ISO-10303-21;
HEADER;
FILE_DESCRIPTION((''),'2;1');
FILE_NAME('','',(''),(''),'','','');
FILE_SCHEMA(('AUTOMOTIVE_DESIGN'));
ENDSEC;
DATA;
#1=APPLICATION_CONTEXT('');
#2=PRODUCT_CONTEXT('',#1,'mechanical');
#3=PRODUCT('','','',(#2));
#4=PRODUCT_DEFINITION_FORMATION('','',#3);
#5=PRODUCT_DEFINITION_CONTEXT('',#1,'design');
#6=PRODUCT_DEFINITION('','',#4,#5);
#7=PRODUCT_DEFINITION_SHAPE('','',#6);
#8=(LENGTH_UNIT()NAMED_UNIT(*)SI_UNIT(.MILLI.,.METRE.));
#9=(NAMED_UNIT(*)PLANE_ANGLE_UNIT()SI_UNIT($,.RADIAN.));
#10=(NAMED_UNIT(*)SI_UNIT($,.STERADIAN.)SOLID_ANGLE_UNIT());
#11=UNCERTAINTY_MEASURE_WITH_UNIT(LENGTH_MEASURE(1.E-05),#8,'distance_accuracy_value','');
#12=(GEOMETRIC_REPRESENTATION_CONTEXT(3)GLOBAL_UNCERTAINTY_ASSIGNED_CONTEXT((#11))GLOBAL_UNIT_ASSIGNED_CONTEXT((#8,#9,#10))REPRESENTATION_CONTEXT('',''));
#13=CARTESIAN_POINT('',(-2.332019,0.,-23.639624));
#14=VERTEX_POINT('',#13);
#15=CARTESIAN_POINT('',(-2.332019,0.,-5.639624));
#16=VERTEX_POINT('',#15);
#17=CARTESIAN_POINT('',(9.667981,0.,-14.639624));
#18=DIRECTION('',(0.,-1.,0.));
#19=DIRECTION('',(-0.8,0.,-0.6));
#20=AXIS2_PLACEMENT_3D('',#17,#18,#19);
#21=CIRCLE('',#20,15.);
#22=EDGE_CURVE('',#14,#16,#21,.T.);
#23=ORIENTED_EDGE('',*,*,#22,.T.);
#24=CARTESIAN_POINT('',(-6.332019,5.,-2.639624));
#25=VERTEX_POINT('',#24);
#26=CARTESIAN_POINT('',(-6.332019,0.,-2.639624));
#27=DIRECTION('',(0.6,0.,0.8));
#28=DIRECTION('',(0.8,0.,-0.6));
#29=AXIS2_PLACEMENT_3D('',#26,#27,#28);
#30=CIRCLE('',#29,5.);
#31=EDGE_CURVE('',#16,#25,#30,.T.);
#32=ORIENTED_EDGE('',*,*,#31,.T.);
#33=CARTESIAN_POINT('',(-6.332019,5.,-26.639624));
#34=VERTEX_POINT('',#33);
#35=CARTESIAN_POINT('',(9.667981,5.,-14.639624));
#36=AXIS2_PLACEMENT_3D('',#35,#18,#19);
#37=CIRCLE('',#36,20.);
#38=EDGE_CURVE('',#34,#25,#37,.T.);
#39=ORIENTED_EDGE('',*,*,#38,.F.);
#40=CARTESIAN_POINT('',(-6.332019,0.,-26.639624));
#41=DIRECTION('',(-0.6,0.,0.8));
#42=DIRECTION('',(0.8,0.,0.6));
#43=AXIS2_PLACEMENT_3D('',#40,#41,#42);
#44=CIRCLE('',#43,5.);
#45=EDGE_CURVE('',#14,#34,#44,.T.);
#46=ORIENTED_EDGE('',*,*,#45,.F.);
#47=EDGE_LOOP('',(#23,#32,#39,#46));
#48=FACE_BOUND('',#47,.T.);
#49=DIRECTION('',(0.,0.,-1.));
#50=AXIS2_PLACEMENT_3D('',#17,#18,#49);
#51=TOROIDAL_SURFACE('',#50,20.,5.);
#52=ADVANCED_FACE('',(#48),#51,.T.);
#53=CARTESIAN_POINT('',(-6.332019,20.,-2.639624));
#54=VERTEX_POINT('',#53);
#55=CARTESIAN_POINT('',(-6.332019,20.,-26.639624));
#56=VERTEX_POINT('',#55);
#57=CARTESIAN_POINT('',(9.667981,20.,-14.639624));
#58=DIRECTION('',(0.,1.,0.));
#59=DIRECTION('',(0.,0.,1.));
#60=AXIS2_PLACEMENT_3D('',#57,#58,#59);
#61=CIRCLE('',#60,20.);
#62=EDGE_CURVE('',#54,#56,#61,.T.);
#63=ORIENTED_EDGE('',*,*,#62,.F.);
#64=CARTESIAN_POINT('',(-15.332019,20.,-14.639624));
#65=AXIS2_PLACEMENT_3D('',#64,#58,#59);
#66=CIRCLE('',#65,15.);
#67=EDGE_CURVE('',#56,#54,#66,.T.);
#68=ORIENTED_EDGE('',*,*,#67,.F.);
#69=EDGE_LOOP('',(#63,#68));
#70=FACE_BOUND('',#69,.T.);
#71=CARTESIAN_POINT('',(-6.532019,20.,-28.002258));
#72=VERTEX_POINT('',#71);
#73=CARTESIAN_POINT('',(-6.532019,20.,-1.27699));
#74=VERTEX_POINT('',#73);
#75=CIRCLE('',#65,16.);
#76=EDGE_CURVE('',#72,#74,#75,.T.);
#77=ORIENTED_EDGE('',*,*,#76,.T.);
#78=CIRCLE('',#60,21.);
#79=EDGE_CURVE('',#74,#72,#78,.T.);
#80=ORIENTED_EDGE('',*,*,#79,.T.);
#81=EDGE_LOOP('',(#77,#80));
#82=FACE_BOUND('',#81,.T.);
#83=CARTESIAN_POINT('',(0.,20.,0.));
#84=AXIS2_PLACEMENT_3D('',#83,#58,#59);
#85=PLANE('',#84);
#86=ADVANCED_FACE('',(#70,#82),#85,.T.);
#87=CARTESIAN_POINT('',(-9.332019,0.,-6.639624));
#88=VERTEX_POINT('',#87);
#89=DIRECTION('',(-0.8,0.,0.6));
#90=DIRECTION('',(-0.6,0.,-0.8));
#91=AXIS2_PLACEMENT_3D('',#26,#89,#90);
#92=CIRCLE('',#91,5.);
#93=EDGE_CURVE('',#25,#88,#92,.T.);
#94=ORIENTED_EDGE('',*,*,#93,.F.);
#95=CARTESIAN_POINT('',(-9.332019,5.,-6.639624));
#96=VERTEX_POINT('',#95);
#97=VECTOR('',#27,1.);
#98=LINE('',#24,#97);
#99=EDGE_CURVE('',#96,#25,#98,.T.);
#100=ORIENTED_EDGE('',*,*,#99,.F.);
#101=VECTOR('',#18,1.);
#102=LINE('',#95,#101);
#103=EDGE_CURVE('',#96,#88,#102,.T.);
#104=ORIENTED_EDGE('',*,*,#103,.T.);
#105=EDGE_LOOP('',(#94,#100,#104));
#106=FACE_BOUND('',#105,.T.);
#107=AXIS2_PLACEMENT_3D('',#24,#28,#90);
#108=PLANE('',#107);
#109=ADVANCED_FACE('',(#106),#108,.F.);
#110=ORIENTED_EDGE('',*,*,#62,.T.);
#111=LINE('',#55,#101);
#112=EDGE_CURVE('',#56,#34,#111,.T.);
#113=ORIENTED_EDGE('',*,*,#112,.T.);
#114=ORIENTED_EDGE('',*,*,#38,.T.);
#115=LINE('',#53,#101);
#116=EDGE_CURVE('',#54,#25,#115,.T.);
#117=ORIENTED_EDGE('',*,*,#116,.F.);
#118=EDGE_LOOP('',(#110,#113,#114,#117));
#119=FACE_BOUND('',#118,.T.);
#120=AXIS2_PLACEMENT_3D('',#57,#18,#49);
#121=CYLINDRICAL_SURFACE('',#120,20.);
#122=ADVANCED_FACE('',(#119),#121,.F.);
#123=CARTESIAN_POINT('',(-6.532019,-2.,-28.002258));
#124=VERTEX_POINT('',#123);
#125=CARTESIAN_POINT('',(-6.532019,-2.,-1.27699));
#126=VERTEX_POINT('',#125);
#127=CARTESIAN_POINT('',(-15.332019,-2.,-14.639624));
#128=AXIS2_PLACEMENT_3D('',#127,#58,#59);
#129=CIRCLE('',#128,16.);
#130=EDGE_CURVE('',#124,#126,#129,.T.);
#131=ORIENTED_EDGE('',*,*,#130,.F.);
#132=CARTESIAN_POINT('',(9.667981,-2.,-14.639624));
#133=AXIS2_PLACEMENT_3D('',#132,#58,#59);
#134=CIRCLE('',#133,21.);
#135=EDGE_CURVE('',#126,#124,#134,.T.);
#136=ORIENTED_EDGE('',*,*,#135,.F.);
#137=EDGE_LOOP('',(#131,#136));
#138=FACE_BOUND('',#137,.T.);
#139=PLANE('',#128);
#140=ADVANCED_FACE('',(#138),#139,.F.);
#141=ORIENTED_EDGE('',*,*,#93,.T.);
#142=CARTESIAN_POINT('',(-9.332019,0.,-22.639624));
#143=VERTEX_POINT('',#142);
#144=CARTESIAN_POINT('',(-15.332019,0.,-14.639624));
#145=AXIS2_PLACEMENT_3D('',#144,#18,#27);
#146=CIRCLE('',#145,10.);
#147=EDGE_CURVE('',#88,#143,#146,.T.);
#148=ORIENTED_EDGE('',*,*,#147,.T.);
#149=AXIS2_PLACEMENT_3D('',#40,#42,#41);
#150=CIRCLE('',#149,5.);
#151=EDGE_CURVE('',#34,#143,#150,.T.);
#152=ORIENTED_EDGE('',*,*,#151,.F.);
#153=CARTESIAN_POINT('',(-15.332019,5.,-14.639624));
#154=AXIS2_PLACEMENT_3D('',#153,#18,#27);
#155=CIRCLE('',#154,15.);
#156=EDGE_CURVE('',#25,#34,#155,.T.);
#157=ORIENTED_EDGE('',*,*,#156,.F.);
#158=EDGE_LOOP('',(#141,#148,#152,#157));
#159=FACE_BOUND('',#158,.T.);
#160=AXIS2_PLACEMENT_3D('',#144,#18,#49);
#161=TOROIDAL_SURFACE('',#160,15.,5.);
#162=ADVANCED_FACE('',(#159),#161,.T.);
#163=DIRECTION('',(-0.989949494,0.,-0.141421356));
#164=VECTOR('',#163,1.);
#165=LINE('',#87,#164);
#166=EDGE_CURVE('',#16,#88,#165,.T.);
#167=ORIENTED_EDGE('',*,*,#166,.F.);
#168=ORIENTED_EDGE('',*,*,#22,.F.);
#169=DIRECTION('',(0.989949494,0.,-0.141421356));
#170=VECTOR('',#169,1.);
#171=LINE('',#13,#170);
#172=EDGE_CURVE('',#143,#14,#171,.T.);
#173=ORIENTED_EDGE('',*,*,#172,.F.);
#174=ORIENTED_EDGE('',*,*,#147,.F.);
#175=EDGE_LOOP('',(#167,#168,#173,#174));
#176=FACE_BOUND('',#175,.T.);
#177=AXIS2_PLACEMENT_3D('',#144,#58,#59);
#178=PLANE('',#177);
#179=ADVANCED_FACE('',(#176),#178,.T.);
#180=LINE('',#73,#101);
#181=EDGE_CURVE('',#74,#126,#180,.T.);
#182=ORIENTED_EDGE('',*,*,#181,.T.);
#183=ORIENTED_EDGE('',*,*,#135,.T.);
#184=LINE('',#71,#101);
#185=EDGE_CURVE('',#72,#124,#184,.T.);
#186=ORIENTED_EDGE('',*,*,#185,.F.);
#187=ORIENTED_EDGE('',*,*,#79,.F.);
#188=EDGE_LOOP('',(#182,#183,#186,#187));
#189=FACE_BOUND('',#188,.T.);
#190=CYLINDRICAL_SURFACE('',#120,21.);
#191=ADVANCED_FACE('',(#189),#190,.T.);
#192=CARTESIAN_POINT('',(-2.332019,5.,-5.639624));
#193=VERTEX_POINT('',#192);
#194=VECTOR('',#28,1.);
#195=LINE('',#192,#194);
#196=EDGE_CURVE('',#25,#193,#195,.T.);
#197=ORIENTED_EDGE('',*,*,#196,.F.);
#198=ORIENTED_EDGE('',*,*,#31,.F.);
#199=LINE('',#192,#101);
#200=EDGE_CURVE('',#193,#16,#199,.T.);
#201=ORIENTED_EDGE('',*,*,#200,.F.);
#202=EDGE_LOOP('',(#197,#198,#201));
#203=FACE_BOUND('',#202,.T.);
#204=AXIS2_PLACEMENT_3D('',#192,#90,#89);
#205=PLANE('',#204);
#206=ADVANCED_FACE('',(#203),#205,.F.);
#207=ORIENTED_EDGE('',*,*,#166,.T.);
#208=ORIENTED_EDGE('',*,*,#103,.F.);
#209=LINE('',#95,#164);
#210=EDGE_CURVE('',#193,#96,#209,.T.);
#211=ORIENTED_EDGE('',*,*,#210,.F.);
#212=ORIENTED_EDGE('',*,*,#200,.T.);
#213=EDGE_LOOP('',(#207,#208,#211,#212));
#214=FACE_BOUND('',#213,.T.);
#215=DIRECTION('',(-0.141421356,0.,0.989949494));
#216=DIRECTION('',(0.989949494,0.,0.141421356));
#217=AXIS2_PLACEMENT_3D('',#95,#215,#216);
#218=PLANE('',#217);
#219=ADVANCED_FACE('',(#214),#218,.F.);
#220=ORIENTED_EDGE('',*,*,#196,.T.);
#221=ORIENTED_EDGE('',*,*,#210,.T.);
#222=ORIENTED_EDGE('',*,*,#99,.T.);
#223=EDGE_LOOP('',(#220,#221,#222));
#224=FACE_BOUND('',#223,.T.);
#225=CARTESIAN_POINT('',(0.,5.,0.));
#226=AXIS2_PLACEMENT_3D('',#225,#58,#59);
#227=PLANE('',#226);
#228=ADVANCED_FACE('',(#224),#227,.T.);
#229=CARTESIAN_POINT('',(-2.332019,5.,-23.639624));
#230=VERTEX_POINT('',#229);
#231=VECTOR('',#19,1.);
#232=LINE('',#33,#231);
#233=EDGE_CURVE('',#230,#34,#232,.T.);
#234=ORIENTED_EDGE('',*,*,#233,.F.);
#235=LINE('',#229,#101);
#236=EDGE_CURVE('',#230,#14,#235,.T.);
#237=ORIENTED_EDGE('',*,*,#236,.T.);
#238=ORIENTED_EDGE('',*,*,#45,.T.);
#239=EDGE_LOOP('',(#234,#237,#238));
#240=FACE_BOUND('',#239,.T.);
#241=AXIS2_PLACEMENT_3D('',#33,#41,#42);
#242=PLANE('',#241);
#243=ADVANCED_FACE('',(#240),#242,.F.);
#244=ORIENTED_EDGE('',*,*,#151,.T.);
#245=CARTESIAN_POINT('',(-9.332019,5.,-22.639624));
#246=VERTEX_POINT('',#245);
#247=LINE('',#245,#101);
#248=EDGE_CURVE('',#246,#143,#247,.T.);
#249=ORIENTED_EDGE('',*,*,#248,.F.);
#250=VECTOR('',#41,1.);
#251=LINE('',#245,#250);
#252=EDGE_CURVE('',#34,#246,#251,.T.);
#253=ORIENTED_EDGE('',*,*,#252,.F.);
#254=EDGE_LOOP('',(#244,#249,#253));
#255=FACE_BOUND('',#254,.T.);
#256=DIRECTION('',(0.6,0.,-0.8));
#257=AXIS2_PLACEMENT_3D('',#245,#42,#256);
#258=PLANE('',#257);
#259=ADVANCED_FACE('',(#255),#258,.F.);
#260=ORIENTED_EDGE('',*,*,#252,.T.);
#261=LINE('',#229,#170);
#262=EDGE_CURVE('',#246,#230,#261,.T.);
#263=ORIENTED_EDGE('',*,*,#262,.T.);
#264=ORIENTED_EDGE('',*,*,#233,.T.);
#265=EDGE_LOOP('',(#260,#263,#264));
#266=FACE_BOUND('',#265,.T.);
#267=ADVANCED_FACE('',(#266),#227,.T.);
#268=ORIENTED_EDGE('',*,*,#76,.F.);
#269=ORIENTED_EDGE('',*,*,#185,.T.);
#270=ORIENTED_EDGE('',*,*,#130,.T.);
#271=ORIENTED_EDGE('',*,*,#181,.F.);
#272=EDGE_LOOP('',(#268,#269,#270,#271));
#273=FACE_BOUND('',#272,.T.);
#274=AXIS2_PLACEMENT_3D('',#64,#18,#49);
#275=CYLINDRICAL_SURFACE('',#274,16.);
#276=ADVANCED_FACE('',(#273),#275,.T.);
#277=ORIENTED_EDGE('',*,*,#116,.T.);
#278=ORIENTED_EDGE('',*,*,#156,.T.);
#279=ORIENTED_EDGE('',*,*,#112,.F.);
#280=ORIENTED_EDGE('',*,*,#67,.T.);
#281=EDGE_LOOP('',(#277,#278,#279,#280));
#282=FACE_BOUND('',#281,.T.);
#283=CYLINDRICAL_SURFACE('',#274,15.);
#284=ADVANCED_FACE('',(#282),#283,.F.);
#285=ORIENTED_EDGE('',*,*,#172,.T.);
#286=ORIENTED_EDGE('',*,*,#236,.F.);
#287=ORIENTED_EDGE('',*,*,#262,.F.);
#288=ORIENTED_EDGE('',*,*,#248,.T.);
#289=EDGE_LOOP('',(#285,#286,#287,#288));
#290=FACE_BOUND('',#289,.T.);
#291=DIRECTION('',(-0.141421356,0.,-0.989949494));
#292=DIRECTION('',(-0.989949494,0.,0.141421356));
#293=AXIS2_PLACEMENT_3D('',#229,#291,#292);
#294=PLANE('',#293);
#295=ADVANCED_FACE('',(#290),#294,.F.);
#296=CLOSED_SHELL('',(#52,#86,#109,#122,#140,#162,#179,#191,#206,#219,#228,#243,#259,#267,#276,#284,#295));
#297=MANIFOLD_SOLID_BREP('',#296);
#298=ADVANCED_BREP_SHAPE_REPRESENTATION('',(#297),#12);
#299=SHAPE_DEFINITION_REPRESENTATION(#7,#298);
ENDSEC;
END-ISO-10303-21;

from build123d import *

# Parameters (mm, degrees)
EXTRUDE_1_DEPTH = 20
EXTRUDE_START   = -2
SKETCH_1_3_R    = 16
SKETCH_1_3_R_2  = 21
EXTRUDE_2_DEPTH = 2
SWEEP_1_ANGLE   = 286.260205
EXTRUDE_4_DEPTH = 5
EXTRUDE_5_DEPTH = 5


# Read off the part's stored shape, not the designer's step: По траектории1
with BuildPart() as part:
    # Эскиз1 → Бобышка-Вытянуть1 (new body)
    with BuildSketch(Plane(origin=(0, 0, 0), x_dir=(1, 0, 0), z_dir=(0, 1, 0))):
        with BuildLine():
            ThreePointArc((-15.332019477, -0.360375994), (-30.332019477, 14.639624006), (-15.332019477, 29.639624006))
            Line((-15.332019477, 29.639624006), (-15.332019477, 30.639624006))
            ThreePointArc((-15.332019477, 30.639624006), (-31.332019477, 14.639624006), (-15.332019477, -1.360375994))
            Line((-15.332019477, -1.360375994), (-15.332019477, -0.360375994))
        make_face()
        with BuildLine():
            Line((-15.332019477, 30.639624006), (-15.332019477, 29.639624006))
            ThreePointArc((-15.332019477, 29.639624006), (-11.459036131, 29.131000752), (-7.848704703, 27.639624006))
            Line((-7.848704703, 27.639624006), (-6.824441979, 27.639624006))
            ThreePointArc((-6.824441979, 27.639624006), (-6.679236311, 27.821752127), (-6.532019477, 28.002258477))
            ThreePointArc((-6.532019477, 28.002258477), (-10.738662944, 29.96610683), (-15.332019477, 30.639624006))
        make_face()
        with BuildLine():
            ThreePointArc((-7.848704703, 1.639624006), (-11.459036131, 0.14824726), (-15.332019477, -0.360375994))
            Line((-15.332019477, -0.360375994), (-15.332019477, -1.360375994))
            ThreePointArc((-15.332019477, -1.360375994), (-10.738662944, -0.686858818), (-6.532019477, 1.276989535))
            ThreePointArc((-6.532019477, 1.276989535), (-6.679236311, 1.457495885), (-6.824441979, 1.639624006))
            Line((-6.824441979, 1.639624006), (-7.848704703, 1.639624006))
        make_face()
        with BuildLine():
            ThreePointArc((-6.004640424, 1.639624006), (-6.266516525, 1.455669507), (-6.532019477, 1.276989535))
            ThreePointArc((-6.532019477, 1.276989535), (0.712963044, -4.355313792), (9.667980523, -6.360375994))
            Line((9.667980523, -6.360375994), (9.667980523, -5.360375994))
            ThreePointArc((9.667980523, -5.360375994), (1.301380258, -3.526278119), (-5.53070363, 1.639624006))
            Line((-5.53070363, 1.639624006), (-6.004640424, 1.639624006))
        make_face()
        with BuildLine():
            ThreePointArc((30.667980523, 14.639624006), (16.767276263, 34.403226916), (-6.532019477, 28.002258477))
            ThreePointArc((-6.532019477, 28.002258477), (-6.266516525, 27.823578505), (-6.004640424, 27.639624006))
            Line((-6.004640424, 27.639624006), (-5.53070363, 27.639624006))
            ThreePointArc((-5.53070363, 27.639624006), (16.597133319, 33.400936368), (29.667980523, 14.639624006))
            ThreePointArc((29.667980523, 14.639624006), (23.810116147, 0.497488382), (9.667980523, -5.360375994))
            Line((9.667980523, -5.360375994), (9.667980523, -6.360375994))
            ThreePointArc((9.667980523, -6.360375994), (24.517222928, -0.209618399), (30.667980523, 14.639624006))
        make_face()
        with BuildLine():
            ThreePointArc((-6.532019477, 28.002258477), (-6.679236311, 27.821752127), (-6.824441979, 27.639624006))
            Line((-6.824441979, 27.639624006), (-6.004640424, 27.639624006))
            ThreePointArc((-6.004640424, 27.639624006), (-6.266516525, 27.823578505), (-6.532019477, 28.002258477))
        make_face()
        with BuildLine():
            Line((-6.824441979, 27.639624006), (-7.848704703, 27.639624006))
            ThreePointArc((-7.848704703, 27.639624006), (-7.497456441, 27.431012595), (-7.152019477, 27.212913154))
            ThreePointArc((-7.152019477, 27.212913154), (-6.989597145, 27.427317552), (-6.824441979, 27.639624006))
        make_face()
        with BuildLine():
            ThreePointArc((-6.824441979, 27.639624006), (-6.989597145, 27.427317552), (-7.152019477, 27.212913154))
            ThreePointArc((-7.152019477, 27.212913154), (-6.737238205, 26.933107438), (-6.332019477, 26.639624006))
            ThreePointArc((-6.332019477, 26.639624006), (-6.02692778, 27.035988527), (-5.712019477, 27.424599563))
            ThreePointArc((-5.712019477, 27.424599563), (-5.857719918, 27.532941961), (-6.004640424, 27.639624006))
            Line((-6.004640424, 27.639624006), (-6.824441979, 27.639624006))
        make_face()
        with BuildLine():
            Line((-5.53070363, 27.639624006), (-6.004640424, 27.639624006))
            ThreePointArc((-6.004640424, 27.639624006), (-5.857719918, 27.532941961), (-5.712019477, 27.424599563))
            ThreePointArc((-5.712019477, 27.424599563), (-5.621739553, 27.532430527), (-5.53070363, 27.639624006))
        make_face()
        with BuildLine():
            ThreePointArc((-6.332019477, 2.639624006), (-6.737238205, 2.346140574), (-7.152019477, 2.066334858))
            ThreePointArc((-7.152019477, 2.066334858), (-6.989597145, 1.85193046), (-6.824441979, 1.639624006))
            Line((-6.824441979, 1.639624006), (-6.004640424, 1.639624006))
            ThreePointArc((-6.004640424, 1.639624006), (-5.857719918, 1.746306051), (-5.712019477, 1.854648449))
            ThreePointArc((-5.712019477, 1.854648449), (-6.02692778, 2.243259485), (-6.332019477, 2.639624006))
        make_face()
        with BuildLine():
            ThreePointArc((-7.152019477, 2.066334858), (-7.497456441, 1.848235417), (-7.848704703, 1.639624006))
            Line((-7.848704703, 1.639624006), (-6.824441979, 1.639624006))
            ThreePointArc((-6.824441979, 1.639624006), (-6.989597145, 1.85193046), (-7.152019477, 2.066334858))
        make_face()
        with BuildLine():
            Line((-6.004640424, 1.639624006), (-6.824441979, 1.639624006))
            ThreePointArc((-6.824441979, 1.639624006), (-6.679236311, 1.457495885), (-6.532019477, 1.276989535))
            ThreePointArc((-6.532019477, 1.276989535), (-6.266516525, 1.455669507), (-6.004640424, 1.639624006))
        make_face()
        with BuildLine():
            ThreePointArc((-5.712019477, 1.854648449), (-5.857719918, 1.746306051), (-6.004640424, 1.639624006))
            Line((-6.004640424, 1.639624006), (-5.53070363, 1.639624006))
            ThreePointArc((-5.53070363, 1.639624006), (-5.621739553, 1.746817485), (-5.712019477, 1.854648449))
        make_face()
    extrude(amount=EXTRUDE_1_DEPTH)

    # Эскиз1<3> → Бобышка-Вытянуть2 (add)
    with BuildSketch(Plane(origin=(0, 0, 0), x_dir=(1, 0, 0), z_dir=(0, 1, 0)).offset(EXTRUDE_START)):
        with Locations((-15.332019477, 14.639624006)):
            Circle(SKETCH_1_3_R)
        with Locations((9.667980523, 14.639624006)):
            Circle(SKETCH_1_3_R_2)
    extrude(amount=EXTRUDE_2_DEPTH)

    # По траектории1 outline → По траектории1 (revolve)
    with BuildSketch(Plane(origin=(9.667980523, 0, -14.639624006), x_dir=(-0.7999999999999995, 0, 0.6000000000000008), z_dir=(-0.6000000000000008, 0, -0.7999999999999995))):
        with BuildLine():
            ThreePointArc((20, 5), (16.464466094, 3.535533906), (15, 0))
            Line((15, 0), (20, 0))
            Line((20, 0), (20, 5))
        make_face()
    revolve(axis=Axis((9.667980523, 0, -14.639624006), (0, 1, 0)), revolution_arc=SWEEP_1_ANGLE)

    # По траектории9: sweep along a curve in space
    with BuildLine() as sweep_9_path:
        ThreePointArc((-6.332019477, 0, -26.639624006), (-30.332019477, 0, -14.639624006), (-6.332019477, 0, -2.639624006))
    # Sketch 5 → По траектории9 (sweep)
    with BuildSketch(Plane(origin=(-30.332019477, 0, -14.639624006), x_dir=(1, 0, 0), z_dir=(0, 0, 1))):
        with BuildLine():
            Line((0, 0), (5, 0))
            ThreePointArc((5, 0), (3.535533906, 3.535533906), (0, 5))
            Line((0, 5), (0, 0))
        make_face()
    sweep(path=sweep_9_path.line)

    # Эскиз17 → Бобышка-Вытянуть4 (add)
    with BuildSketch(Plane(origin=(0, 0, 0), x_dir=(1, 0, 0), z_dir=(0, 1, 0))):
        Polygon((-9.332019477, 6.639624006), (-2.332019477, 5.639624006), (-6.332019477, 2.639624006), align=None)
    extrude(amount=EXTRUDE_4_DEPTH)

    # Эскиз19 → Бобышка-Вытянуть5 (add)
    with BuildSketch(Plane(origin=(0, 0, 0), x_dir=(1, 0, 0), z_dir=(0, 1, 0))):
        Polygon((-2.332019477, 23.639624006), (-9.332019477, 22.639624006), (-6.332019477, 26.639624006), align=None)
    extrude(amount=EXTRUDE_5_DEPTH)


solid = part.part
